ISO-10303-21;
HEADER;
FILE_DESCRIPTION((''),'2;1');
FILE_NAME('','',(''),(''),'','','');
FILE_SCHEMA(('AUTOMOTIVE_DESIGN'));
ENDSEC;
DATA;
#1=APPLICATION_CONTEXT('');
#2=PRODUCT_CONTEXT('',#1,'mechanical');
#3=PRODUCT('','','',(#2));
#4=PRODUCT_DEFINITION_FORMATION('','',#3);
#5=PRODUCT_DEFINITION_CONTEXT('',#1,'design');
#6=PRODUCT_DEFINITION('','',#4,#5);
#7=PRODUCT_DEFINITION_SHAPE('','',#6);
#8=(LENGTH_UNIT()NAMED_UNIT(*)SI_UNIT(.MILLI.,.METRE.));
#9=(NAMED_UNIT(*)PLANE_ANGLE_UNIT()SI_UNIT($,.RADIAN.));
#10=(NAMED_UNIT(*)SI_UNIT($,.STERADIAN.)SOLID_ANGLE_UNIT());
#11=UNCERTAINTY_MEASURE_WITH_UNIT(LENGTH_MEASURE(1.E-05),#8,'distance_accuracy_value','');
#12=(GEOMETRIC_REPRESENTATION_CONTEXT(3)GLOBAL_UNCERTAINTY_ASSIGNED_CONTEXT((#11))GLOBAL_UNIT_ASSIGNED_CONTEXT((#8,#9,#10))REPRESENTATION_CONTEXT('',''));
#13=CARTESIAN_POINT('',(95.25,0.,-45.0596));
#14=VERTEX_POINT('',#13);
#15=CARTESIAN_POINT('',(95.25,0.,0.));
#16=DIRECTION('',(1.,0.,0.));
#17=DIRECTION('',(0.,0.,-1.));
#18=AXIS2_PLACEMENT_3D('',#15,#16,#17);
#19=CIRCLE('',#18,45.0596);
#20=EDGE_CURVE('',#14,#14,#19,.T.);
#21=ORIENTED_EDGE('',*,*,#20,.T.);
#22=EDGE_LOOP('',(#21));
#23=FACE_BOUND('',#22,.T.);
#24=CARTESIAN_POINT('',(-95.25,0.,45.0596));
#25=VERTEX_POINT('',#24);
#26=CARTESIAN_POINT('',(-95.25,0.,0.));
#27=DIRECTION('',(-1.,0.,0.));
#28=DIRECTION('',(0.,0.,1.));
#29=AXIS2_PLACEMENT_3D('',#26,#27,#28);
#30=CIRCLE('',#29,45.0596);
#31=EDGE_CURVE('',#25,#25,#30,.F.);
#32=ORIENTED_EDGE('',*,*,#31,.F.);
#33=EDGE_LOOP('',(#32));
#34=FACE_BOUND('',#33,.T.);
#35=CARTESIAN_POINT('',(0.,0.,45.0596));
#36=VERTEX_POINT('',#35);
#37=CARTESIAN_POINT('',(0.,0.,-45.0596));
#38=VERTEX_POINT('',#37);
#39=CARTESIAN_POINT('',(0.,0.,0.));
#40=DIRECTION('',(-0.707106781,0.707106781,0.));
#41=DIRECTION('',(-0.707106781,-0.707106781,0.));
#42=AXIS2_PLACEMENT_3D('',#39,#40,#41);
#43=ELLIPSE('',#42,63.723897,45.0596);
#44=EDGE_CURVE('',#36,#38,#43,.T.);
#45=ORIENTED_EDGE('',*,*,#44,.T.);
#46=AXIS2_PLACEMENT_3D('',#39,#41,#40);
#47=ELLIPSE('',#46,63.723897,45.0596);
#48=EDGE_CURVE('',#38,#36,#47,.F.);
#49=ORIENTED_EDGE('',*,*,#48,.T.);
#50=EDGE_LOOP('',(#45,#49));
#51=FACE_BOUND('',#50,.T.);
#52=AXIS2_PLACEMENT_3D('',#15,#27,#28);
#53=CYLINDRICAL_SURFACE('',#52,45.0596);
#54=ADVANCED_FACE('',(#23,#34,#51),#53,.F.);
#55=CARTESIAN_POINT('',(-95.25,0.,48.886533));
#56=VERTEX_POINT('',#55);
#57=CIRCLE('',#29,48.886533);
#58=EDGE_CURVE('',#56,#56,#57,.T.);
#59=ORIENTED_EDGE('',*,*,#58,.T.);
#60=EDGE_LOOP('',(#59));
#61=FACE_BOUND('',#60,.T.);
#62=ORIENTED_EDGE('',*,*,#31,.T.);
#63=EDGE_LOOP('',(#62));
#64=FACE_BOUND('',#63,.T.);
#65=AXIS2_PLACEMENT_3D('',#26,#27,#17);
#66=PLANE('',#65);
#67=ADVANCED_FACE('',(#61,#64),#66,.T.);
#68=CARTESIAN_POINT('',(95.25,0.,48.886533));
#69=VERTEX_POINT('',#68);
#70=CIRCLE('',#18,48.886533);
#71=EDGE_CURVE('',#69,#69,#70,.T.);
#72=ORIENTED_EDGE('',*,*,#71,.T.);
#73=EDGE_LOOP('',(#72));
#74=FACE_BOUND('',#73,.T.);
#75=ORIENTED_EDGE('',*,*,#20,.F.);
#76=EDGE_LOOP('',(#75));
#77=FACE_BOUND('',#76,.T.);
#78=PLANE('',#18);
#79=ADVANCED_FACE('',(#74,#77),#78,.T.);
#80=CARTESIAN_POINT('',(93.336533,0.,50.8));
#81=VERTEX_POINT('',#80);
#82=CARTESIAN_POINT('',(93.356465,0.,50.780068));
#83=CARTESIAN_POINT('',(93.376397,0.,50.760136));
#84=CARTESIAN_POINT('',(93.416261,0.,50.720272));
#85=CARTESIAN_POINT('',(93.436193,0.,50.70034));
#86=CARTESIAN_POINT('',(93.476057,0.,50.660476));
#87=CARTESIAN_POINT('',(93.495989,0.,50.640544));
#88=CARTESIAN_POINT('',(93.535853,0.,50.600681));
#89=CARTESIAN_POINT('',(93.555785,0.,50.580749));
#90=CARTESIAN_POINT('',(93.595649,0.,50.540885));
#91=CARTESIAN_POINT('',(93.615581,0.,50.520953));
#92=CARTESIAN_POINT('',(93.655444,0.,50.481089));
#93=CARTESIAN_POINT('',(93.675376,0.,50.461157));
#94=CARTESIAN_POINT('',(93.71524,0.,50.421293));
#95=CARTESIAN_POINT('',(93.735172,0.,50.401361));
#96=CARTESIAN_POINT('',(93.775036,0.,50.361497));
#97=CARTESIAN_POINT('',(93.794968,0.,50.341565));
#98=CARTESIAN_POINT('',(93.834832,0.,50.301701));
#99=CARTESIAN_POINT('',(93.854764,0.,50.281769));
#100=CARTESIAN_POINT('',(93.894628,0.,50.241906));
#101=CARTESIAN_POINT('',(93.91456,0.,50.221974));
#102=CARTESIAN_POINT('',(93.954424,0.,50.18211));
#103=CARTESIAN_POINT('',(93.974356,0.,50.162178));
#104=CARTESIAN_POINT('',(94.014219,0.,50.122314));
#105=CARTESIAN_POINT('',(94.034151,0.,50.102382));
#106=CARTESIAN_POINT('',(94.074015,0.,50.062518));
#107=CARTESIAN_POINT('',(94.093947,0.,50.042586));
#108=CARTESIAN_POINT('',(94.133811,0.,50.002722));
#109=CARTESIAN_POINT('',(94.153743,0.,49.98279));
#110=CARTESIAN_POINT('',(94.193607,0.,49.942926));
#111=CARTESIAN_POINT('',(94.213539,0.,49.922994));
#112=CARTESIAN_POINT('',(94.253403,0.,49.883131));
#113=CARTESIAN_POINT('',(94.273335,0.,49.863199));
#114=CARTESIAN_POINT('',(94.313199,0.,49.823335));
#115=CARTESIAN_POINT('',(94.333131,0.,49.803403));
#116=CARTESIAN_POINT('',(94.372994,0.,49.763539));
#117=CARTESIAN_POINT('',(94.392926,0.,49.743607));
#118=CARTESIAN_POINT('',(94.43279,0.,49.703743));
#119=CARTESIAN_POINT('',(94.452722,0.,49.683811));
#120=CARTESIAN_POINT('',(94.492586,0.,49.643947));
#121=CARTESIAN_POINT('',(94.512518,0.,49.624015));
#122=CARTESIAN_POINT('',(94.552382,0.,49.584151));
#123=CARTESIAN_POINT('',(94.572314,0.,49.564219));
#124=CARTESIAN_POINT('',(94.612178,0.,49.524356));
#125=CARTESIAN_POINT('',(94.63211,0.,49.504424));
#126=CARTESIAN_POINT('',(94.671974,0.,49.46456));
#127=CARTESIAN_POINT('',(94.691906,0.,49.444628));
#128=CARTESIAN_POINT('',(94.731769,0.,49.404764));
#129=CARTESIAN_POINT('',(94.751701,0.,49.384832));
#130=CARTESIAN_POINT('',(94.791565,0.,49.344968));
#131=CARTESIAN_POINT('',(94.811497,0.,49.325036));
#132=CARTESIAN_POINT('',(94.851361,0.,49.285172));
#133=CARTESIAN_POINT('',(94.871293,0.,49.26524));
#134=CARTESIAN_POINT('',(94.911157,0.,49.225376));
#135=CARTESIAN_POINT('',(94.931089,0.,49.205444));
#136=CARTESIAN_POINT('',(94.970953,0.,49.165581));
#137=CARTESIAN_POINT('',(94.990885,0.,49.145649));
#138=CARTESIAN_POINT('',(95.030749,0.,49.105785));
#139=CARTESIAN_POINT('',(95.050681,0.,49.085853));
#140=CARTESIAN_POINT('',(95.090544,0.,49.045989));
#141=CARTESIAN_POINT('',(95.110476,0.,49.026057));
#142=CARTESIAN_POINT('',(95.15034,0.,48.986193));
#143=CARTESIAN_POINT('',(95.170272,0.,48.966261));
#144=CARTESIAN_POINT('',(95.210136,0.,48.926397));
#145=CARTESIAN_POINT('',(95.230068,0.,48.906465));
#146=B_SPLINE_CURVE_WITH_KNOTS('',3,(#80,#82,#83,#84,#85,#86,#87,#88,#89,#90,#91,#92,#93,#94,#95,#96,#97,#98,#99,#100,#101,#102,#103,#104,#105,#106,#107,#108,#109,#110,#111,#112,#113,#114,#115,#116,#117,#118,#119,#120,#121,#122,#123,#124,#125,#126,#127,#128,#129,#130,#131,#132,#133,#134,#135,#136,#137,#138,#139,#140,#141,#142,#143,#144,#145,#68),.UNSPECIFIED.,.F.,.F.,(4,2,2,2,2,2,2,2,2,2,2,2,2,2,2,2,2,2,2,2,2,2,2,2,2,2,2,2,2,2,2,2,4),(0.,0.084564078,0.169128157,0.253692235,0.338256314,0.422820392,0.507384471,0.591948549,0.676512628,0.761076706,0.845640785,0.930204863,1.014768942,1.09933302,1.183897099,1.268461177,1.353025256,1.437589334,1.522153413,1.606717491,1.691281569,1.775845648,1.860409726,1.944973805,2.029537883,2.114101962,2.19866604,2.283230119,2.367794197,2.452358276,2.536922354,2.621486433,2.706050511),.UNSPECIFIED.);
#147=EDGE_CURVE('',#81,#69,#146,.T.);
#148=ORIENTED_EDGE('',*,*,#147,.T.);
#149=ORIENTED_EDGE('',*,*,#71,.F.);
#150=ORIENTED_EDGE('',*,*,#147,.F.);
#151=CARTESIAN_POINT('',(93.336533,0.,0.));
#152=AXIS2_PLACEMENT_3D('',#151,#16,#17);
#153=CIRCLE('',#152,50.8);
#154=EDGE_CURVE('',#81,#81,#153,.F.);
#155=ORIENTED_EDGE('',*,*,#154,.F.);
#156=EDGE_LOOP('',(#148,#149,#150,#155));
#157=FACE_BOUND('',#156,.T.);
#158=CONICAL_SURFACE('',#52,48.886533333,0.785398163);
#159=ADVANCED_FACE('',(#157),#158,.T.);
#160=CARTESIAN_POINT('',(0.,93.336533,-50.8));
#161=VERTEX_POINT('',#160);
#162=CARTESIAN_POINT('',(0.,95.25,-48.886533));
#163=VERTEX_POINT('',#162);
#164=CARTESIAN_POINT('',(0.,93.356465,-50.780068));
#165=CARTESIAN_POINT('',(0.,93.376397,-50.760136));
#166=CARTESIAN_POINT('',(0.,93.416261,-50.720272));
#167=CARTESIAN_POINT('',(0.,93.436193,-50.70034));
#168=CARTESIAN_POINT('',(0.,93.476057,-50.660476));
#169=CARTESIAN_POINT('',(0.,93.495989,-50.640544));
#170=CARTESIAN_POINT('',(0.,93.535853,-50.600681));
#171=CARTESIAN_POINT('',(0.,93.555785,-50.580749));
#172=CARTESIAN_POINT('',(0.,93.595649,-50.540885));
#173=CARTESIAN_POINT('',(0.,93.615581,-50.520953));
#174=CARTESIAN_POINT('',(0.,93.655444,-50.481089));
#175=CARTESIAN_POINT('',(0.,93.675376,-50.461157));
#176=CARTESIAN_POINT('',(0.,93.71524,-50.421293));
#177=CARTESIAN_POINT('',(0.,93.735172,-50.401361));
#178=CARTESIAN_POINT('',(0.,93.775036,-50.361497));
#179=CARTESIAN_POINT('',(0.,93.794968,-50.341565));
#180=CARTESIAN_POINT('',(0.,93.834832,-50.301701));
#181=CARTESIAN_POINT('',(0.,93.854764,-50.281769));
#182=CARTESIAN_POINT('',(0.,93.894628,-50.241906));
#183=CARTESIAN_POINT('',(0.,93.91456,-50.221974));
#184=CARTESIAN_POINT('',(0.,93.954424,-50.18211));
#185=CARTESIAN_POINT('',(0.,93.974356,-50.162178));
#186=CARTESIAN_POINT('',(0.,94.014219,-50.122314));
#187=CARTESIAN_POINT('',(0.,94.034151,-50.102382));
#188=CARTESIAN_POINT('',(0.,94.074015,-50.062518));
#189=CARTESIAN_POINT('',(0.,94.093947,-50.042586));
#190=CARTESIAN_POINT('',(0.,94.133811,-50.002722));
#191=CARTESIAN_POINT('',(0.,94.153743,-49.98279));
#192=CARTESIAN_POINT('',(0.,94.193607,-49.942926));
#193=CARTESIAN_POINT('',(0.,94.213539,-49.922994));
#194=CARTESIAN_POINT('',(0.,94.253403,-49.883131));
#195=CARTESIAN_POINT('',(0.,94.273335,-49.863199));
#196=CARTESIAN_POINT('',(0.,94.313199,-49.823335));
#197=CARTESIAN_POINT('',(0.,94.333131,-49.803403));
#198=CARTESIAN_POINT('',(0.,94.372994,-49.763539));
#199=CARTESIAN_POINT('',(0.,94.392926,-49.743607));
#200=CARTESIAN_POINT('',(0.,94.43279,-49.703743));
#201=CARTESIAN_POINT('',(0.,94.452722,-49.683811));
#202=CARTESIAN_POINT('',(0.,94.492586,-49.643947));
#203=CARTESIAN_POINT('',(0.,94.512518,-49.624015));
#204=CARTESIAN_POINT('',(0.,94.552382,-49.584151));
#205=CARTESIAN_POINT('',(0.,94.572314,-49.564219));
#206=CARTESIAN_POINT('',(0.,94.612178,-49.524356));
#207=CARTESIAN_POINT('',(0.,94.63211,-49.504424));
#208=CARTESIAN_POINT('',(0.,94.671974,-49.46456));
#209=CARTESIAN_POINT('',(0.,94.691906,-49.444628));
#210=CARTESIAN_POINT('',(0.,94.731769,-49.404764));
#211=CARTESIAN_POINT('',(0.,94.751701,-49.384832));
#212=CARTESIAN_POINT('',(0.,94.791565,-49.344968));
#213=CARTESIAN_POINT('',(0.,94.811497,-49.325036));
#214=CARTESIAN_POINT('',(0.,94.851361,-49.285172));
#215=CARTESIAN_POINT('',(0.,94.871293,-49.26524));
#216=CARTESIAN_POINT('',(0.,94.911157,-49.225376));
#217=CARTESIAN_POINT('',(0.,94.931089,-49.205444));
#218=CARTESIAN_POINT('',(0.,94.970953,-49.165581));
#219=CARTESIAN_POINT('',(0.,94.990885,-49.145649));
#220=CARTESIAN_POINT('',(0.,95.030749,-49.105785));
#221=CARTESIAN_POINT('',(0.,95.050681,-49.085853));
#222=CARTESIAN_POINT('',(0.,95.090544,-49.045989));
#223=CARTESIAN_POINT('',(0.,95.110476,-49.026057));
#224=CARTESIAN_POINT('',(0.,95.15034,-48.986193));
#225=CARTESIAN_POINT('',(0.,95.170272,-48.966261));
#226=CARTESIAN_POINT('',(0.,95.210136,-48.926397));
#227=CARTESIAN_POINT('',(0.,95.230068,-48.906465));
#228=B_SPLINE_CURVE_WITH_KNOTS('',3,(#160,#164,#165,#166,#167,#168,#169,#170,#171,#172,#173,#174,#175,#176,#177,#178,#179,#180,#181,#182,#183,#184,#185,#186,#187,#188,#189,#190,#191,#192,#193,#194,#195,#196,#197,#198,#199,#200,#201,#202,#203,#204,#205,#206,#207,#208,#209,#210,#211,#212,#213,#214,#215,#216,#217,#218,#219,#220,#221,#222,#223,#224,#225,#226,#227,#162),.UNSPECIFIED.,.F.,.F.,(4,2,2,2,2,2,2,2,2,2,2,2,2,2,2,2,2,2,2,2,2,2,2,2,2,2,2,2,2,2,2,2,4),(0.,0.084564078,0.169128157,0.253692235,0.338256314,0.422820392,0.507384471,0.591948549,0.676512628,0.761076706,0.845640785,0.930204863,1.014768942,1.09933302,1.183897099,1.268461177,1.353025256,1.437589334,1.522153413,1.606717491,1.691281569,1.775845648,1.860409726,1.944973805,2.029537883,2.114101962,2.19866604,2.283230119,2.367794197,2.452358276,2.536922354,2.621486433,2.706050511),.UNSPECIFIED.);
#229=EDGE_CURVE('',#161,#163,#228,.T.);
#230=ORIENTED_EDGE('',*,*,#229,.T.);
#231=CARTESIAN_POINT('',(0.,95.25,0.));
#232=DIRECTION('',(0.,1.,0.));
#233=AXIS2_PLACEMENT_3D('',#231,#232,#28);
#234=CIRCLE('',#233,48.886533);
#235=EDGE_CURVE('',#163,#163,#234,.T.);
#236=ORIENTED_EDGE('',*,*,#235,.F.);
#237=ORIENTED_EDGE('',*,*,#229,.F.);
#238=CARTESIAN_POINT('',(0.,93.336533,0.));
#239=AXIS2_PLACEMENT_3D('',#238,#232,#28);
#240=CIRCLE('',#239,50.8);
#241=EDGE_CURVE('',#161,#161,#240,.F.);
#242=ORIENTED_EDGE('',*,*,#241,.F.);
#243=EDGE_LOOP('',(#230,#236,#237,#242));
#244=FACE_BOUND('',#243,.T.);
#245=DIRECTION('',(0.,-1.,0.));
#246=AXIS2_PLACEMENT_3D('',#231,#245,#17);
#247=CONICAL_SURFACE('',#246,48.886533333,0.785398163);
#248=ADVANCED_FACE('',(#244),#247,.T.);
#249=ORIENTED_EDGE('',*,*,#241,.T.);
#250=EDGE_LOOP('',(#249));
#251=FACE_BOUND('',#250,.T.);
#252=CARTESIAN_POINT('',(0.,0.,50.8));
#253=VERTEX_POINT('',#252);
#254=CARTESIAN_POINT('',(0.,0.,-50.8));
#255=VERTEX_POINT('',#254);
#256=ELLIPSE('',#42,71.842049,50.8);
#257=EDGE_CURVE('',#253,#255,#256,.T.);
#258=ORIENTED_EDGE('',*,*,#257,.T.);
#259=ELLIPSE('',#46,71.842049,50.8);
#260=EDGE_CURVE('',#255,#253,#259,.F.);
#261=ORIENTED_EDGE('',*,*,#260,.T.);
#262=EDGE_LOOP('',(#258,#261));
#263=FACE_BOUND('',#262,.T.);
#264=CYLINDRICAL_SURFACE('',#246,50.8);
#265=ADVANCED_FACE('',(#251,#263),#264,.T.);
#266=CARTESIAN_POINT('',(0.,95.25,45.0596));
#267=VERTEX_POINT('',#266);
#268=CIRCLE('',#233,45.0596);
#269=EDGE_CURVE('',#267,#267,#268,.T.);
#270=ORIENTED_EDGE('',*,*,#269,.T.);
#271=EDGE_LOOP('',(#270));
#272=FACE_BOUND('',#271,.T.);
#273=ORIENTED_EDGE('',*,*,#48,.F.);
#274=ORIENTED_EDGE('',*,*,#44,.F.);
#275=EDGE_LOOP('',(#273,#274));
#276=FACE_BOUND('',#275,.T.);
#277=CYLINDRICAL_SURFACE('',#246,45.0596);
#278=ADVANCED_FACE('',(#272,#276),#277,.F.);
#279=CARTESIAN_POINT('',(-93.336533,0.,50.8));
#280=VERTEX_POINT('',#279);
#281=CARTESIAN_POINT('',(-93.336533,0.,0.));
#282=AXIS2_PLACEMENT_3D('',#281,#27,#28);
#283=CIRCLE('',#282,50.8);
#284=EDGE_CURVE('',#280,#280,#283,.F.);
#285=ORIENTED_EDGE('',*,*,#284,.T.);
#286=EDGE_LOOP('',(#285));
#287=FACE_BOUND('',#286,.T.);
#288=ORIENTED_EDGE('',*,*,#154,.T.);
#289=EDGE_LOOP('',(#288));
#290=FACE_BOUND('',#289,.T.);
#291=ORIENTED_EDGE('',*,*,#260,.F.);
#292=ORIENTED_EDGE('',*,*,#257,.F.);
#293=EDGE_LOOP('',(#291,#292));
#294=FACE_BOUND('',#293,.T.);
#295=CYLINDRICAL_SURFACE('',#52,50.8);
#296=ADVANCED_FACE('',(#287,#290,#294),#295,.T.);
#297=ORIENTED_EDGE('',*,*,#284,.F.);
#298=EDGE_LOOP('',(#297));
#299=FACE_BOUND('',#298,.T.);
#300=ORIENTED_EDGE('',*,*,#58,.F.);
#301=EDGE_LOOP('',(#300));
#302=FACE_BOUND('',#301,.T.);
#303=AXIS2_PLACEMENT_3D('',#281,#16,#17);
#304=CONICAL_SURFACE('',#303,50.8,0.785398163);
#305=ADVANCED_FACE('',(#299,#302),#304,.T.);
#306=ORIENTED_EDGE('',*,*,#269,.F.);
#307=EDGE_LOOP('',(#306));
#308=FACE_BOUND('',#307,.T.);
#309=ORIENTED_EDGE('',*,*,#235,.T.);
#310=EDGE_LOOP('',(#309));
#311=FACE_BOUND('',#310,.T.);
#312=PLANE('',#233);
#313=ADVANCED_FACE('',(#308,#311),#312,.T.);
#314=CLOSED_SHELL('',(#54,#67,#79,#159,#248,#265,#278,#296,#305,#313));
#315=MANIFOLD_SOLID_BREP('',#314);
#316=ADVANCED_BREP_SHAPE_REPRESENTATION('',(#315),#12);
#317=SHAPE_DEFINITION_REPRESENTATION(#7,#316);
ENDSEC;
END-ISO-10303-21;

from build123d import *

# Parameters (mm, degrees)
RUNROUTE_R           = 50.8
RUNEXTRUDE_DEPTH     = 95.25
OUTLETROUTE_R        = 50.8
OUTLETEXTRUDE_DEPTH  = 95.25
TEESHELL_START       = -95.25
TEESHELL_OUTLINE_R   = 45.0596
TEESHELL_DEPTH       = 190.5
TEESHELL_START_2     = -1e-07
TEESHELL_2_OUTLINE_R = 45.0596
TEESHELL_2_DEPTH     = 95.2500001
TEECHAMFER_SIZE      = 1.913466667


with BuildPart() as part:
    # RunRoute → RunExtrude (new body)
    with BuildSketch(Plane(origin=(0, 0, 0), x_dir=(0, 0, -1), z_dir=(1, 0, 0))):
        Circle(RUNROUTE_R)
    runextrude = extrude(amount=RUNEXTRUDE_DEPTH)

    # RunExtrudeMirror: RunExtrude across plane
    add(runextrude.mirror(Plane(origin=(0, 0, 0), x_dir=(0, 0, 1), z_dir=(1, 0, 0))))

    # OutletRoute → OutletExtrude (add)
    with BuildSketch(Plane(origin=(0, 0, 0), x_dir=(1, 0, 0), z_dir=(0, 1, 0))):
        with Locations(Location((0, 0, 0), (0, 0, 270))):
            Circle(OUTLETROUTE_R)
    extrude(amount=OUTLETEXTRUDE_DEPTH)

    # TeeShell: read off the stored shape, not the designer's step
    # TeeShell outline → TeeShell (cut)
    with BuildSketch(Plane.YZ.offset(TEESHELL_START)):
        Circle(TEESHELL_OUTLINE_R)
    extrude(amount=TEESHELL_DEPTH, mode=Mode.SUBTRACT)

    # TeeShell 2 outline → TeeShell 2 (cut)
    with BuildSketch(Plane(origin=(0, 0, 0), x_dir=(1, 0, 0), z_dir=(0, 1, 0)).offset(TEESHELL_START_2)):
        Circle(TEESHELL_2_OUTLINE_R)
    extrude(amount=TEESHELL_2_DEPTH, mode=Mode.SUBTRACT)

    # TeeChamfer
    # the kernel refuses this chamfer: 1.913466667 mm, written as the material it takes off along each edge
    with BuildSketch(Plane(origin=(95.25, 0, 0), x_dir=(0, 0, -1), z_dir=(0, -1, 0))) as teechamfer_piece_1:
        Polygon((50.8, -TEECHAMFER_SIZE), (50.8 - TEECHAMFER_SIZE, 0), (50.8, 0), align=None)
    revolve(axis=Axis((95.25, 0, 0), (1, 0, 0)), mode=Mode.SUBTRACT)
    with BuildSketch(Plane(origin=(-95.25, 0, 0), x_dir=(0, 0, -1), z_dir=(0, -1, 0))) as teechamfer_piece_2:
        Polygon((50.8, TEECHAMFER_SIZE), (50.8 - TEECHAMFER_SIZE, 0), (50.8, 0), align=None)
    revolve(axis=Axis((-95.25, 0, 0), (1, 0, 0)), mode=Mode.SUBTRACT)
    with BuildSketch(Plane(origin=(0, 95.25, 0), x_dir=(0, 0, 1), z_dir=(-1, 0, 0))) as teechamfer_piece_3:
        Polygon((50.8, -TEECHAMFER_SIZE), (50.8 - TEECHAMFER_SIZE, 0), (50.8, 0), align=None)
    revolve(axis=Axis((0, 95.25, 0), (0, 1, 0)), mode=Mode.SUBTRACT)


solid = part.part
